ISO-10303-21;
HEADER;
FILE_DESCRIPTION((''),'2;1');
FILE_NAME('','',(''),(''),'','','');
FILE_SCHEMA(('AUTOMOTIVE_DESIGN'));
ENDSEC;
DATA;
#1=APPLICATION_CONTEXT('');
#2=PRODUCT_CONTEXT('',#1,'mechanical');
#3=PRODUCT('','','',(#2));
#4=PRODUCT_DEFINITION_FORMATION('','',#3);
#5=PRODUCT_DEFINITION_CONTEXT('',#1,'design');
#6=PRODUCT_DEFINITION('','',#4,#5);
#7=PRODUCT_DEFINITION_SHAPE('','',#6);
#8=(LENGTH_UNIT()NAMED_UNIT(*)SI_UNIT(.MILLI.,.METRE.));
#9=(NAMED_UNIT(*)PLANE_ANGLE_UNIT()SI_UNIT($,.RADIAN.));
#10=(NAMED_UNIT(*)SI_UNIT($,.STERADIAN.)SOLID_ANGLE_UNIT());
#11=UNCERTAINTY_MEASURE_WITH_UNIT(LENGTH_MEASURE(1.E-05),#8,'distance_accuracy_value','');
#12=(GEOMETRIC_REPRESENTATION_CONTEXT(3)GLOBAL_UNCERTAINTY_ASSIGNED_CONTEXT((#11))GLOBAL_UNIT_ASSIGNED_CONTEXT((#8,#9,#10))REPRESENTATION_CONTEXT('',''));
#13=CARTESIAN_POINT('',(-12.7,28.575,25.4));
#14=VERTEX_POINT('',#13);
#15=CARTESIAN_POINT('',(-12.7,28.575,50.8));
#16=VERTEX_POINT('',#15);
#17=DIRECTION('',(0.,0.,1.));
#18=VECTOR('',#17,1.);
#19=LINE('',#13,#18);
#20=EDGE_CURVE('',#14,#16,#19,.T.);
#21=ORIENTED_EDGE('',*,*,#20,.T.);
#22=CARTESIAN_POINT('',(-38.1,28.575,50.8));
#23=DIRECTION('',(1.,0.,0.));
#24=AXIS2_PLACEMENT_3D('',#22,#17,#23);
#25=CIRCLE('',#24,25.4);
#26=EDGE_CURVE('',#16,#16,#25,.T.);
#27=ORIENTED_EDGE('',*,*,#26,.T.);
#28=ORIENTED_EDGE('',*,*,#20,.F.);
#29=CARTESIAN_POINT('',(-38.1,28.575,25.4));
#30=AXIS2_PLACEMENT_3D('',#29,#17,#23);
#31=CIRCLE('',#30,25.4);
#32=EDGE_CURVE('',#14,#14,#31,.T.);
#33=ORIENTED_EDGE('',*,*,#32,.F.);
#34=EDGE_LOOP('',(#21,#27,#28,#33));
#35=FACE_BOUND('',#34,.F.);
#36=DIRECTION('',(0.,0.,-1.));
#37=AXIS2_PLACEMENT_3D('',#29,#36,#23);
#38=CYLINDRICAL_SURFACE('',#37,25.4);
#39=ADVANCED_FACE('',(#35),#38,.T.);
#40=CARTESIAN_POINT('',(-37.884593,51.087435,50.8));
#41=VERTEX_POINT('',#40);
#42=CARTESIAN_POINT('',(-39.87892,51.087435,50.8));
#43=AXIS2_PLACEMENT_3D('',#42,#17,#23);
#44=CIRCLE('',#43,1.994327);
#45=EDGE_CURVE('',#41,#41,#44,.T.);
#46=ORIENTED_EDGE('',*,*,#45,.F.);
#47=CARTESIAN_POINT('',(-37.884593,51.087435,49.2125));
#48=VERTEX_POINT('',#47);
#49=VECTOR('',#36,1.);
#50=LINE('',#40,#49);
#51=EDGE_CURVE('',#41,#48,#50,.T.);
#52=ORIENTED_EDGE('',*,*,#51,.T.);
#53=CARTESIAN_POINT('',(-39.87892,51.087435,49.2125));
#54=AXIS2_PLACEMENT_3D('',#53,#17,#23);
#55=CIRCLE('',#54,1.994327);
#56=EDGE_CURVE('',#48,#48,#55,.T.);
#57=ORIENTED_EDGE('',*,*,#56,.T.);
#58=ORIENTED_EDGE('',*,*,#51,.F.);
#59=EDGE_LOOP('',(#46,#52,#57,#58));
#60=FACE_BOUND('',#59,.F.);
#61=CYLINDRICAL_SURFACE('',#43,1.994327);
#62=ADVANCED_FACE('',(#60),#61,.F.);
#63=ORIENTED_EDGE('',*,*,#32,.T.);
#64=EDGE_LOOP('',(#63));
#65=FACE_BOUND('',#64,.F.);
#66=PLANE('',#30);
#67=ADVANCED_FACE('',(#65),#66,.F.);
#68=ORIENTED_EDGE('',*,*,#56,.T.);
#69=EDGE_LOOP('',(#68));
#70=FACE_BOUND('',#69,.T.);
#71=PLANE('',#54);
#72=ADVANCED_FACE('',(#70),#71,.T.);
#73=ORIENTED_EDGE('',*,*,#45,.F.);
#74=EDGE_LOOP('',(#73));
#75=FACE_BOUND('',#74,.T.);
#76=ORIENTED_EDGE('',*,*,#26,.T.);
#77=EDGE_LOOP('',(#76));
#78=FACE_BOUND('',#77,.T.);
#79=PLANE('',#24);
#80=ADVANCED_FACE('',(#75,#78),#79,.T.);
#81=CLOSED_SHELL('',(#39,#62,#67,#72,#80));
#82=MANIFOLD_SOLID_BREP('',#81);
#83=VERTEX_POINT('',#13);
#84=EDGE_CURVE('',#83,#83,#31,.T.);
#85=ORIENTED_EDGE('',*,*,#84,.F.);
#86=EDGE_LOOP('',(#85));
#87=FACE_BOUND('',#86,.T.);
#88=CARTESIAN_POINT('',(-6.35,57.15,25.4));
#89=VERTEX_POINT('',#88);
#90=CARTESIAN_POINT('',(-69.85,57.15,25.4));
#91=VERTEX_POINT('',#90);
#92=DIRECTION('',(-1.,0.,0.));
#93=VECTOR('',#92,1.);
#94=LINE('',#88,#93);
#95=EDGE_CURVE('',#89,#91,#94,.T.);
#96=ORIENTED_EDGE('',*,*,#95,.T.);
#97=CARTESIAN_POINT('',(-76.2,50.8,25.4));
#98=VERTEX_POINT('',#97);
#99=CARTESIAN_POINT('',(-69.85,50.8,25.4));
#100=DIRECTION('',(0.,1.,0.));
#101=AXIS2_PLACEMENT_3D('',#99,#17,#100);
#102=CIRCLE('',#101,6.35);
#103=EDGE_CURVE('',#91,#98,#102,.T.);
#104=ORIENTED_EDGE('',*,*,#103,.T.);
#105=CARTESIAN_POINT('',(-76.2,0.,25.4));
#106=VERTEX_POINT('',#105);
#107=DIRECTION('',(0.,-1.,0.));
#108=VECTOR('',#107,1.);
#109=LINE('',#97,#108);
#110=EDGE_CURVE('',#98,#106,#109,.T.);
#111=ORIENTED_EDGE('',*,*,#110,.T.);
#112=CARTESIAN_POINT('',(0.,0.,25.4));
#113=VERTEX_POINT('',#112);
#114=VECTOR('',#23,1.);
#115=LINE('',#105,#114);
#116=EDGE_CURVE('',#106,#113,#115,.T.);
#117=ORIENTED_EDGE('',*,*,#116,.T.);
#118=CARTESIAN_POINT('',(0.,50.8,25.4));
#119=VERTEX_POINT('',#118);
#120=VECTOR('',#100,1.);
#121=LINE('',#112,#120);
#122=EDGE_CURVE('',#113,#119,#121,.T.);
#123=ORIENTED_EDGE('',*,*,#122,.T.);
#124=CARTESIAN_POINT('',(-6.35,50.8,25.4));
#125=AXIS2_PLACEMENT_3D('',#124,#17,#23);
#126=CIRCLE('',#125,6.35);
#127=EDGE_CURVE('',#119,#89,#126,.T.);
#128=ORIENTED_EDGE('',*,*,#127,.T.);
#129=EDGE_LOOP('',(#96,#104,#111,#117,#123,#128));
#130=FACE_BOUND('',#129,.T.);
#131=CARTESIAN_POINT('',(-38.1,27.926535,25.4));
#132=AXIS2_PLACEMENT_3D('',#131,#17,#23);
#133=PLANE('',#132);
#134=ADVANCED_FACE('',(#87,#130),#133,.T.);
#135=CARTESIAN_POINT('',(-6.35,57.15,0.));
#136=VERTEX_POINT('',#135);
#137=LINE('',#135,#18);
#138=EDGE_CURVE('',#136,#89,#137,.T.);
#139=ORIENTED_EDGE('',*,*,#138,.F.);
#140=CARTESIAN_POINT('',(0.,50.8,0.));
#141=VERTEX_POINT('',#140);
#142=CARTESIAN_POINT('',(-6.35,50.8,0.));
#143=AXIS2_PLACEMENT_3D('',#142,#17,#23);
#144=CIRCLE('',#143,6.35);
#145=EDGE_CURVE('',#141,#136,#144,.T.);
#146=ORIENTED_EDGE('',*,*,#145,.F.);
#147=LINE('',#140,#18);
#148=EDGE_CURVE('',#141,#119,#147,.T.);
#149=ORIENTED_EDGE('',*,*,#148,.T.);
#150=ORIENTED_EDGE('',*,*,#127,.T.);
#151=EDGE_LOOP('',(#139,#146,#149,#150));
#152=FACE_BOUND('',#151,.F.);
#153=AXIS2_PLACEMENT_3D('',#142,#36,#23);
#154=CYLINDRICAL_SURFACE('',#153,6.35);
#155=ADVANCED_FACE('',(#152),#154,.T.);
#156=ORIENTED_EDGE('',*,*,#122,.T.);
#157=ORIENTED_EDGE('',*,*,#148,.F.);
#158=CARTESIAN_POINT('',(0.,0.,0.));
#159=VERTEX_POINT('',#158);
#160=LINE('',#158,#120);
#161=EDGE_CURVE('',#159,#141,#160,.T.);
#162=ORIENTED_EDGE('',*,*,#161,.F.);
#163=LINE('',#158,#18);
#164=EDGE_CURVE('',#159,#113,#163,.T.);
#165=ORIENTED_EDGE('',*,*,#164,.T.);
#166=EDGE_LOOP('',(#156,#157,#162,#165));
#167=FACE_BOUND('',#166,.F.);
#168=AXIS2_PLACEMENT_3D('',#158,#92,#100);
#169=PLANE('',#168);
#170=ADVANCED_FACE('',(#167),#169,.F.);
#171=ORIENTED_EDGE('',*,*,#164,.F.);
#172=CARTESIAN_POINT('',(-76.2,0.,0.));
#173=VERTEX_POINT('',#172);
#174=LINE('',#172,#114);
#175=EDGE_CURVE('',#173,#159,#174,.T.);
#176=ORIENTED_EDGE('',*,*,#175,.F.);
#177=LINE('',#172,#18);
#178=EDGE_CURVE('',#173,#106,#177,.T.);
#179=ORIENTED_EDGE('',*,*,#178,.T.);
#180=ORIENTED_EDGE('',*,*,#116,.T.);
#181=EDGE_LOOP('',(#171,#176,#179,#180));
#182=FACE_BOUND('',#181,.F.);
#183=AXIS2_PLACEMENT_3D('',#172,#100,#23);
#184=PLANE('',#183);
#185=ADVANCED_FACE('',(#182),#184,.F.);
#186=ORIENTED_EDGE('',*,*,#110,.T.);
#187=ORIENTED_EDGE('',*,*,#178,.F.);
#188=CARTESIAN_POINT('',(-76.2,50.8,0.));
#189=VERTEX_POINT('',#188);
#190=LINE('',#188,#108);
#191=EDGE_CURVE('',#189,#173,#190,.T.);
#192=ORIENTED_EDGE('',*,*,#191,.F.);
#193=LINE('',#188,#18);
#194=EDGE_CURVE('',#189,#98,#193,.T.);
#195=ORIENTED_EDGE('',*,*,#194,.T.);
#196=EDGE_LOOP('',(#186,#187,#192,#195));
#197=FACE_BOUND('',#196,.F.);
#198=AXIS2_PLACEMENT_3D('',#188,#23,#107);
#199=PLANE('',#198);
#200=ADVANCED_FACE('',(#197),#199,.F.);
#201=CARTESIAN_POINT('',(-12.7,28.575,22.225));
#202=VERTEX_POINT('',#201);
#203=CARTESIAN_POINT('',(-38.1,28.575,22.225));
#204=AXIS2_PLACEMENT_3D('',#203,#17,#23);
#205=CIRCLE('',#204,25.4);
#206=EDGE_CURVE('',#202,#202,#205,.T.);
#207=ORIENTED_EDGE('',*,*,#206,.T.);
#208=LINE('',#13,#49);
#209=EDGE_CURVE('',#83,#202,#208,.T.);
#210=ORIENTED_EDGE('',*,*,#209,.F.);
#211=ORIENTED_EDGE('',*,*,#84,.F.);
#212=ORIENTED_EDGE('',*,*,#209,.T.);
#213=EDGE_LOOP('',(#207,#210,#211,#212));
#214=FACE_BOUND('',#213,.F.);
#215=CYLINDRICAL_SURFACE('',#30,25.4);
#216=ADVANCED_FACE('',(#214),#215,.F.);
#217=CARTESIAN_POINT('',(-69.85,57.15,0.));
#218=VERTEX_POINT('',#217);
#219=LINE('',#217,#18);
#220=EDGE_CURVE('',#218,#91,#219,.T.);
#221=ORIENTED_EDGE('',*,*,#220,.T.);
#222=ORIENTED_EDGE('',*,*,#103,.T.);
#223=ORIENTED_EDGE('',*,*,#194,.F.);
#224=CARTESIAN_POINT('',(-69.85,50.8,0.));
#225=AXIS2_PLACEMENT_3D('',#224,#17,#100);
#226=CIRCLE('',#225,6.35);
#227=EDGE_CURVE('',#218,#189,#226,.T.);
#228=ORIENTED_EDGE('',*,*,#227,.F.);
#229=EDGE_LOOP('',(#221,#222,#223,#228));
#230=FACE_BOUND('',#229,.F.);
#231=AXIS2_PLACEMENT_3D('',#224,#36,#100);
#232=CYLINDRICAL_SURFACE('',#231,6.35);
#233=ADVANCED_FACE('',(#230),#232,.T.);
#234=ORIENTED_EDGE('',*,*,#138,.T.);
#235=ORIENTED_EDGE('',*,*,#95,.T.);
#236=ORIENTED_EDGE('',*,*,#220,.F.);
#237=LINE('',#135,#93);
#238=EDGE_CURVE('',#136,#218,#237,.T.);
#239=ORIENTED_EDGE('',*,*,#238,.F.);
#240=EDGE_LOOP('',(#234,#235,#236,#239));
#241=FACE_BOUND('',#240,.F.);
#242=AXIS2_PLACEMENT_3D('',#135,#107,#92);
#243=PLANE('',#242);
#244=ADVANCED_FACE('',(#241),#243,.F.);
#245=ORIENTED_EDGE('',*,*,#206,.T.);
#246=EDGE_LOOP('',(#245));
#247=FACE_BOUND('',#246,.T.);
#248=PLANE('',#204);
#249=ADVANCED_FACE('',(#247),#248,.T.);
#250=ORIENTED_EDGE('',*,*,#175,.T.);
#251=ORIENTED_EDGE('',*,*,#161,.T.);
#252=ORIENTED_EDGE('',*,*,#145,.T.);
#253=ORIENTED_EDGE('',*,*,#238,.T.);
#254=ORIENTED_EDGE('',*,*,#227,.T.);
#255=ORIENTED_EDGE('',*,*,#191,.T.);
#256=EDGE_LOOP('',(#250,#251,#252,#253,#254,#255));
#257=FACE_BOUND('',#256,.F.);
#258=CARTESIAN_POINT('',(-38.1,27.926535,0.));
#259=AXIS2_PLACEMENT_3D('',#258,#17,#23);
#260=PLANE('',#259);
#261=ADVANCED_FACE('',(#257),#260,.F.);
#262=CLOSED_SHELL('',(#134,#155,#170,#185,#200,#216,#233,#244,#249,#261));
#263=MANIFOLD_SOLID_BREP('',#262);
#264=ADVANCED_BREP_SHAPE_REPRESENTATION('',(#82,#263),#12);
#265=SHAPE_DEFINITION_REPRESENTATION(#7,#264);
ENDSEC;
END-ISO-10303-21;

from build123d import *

# Parameters (mm, degrees)
F1_DEPTH = 25.4
F2_R     = 25.4
F3_DEPTH = 25.4
F6_DEPTH = 3.175
F7_R     = 1.9943268645
F8_DEPTH = 1.5875


# Not quite as in the source:
# - a feature of the source that left no trace in its solid (it failed there, or was rolled back) is left out


with BuildPart() as f1:
    # F0 (on Top) → F1 (new body)
    with BuildSketch(Plane.XY):
        with BuildLine():
            Line((-76.2, 0), (0, 0))
            Line((0, 0), (0, 50.8))
            ThreePointArc((0, 50.8), (-1.8598719395, 55.2901280605), (-6.35, 57.15))
            Line((-6.35, 57.15), (-69.85, 57.15))
            ThreePointArc((-69.85, 57.15), (-74.3401280605, 55.2901280605), (-76.2, 50.8))
            Line((-76.2, 50.8), (-76.2, 0))
        make_face()
    extrude(amount=F1_DEPTH)

    # F2 (on face) → F6 (cut)
    with BuildSketch(Plane.XY.offset(25.4)):
        with Locations((-38.1, 28.575)):
            Circle(F2_R)
    extrude(amount=-F6_DEPTH, mode=Mode.SUBTRACT)


with BuildPart() as f3:
    # F2 (on face) → F3 (new body)
    with BuildSketch(Plane.XY.offset(25.4)):
        with Locations((-38.1, 28.575)):
            Circle(F2_R)
    extrude(amount=F3_DEPTH)

    # F7 (on face) → F8 (cut)
    with BuildSketch(Plane.XY.offset(50.8)):
        with Locations((-39.8789197206, 51.0874353349)):
            Circle(F7_R)
    extrude(amount=-F8_DEPTH, mode=Mode.SUBTRACT)


solid = Compound([f1.part, f3.part])
